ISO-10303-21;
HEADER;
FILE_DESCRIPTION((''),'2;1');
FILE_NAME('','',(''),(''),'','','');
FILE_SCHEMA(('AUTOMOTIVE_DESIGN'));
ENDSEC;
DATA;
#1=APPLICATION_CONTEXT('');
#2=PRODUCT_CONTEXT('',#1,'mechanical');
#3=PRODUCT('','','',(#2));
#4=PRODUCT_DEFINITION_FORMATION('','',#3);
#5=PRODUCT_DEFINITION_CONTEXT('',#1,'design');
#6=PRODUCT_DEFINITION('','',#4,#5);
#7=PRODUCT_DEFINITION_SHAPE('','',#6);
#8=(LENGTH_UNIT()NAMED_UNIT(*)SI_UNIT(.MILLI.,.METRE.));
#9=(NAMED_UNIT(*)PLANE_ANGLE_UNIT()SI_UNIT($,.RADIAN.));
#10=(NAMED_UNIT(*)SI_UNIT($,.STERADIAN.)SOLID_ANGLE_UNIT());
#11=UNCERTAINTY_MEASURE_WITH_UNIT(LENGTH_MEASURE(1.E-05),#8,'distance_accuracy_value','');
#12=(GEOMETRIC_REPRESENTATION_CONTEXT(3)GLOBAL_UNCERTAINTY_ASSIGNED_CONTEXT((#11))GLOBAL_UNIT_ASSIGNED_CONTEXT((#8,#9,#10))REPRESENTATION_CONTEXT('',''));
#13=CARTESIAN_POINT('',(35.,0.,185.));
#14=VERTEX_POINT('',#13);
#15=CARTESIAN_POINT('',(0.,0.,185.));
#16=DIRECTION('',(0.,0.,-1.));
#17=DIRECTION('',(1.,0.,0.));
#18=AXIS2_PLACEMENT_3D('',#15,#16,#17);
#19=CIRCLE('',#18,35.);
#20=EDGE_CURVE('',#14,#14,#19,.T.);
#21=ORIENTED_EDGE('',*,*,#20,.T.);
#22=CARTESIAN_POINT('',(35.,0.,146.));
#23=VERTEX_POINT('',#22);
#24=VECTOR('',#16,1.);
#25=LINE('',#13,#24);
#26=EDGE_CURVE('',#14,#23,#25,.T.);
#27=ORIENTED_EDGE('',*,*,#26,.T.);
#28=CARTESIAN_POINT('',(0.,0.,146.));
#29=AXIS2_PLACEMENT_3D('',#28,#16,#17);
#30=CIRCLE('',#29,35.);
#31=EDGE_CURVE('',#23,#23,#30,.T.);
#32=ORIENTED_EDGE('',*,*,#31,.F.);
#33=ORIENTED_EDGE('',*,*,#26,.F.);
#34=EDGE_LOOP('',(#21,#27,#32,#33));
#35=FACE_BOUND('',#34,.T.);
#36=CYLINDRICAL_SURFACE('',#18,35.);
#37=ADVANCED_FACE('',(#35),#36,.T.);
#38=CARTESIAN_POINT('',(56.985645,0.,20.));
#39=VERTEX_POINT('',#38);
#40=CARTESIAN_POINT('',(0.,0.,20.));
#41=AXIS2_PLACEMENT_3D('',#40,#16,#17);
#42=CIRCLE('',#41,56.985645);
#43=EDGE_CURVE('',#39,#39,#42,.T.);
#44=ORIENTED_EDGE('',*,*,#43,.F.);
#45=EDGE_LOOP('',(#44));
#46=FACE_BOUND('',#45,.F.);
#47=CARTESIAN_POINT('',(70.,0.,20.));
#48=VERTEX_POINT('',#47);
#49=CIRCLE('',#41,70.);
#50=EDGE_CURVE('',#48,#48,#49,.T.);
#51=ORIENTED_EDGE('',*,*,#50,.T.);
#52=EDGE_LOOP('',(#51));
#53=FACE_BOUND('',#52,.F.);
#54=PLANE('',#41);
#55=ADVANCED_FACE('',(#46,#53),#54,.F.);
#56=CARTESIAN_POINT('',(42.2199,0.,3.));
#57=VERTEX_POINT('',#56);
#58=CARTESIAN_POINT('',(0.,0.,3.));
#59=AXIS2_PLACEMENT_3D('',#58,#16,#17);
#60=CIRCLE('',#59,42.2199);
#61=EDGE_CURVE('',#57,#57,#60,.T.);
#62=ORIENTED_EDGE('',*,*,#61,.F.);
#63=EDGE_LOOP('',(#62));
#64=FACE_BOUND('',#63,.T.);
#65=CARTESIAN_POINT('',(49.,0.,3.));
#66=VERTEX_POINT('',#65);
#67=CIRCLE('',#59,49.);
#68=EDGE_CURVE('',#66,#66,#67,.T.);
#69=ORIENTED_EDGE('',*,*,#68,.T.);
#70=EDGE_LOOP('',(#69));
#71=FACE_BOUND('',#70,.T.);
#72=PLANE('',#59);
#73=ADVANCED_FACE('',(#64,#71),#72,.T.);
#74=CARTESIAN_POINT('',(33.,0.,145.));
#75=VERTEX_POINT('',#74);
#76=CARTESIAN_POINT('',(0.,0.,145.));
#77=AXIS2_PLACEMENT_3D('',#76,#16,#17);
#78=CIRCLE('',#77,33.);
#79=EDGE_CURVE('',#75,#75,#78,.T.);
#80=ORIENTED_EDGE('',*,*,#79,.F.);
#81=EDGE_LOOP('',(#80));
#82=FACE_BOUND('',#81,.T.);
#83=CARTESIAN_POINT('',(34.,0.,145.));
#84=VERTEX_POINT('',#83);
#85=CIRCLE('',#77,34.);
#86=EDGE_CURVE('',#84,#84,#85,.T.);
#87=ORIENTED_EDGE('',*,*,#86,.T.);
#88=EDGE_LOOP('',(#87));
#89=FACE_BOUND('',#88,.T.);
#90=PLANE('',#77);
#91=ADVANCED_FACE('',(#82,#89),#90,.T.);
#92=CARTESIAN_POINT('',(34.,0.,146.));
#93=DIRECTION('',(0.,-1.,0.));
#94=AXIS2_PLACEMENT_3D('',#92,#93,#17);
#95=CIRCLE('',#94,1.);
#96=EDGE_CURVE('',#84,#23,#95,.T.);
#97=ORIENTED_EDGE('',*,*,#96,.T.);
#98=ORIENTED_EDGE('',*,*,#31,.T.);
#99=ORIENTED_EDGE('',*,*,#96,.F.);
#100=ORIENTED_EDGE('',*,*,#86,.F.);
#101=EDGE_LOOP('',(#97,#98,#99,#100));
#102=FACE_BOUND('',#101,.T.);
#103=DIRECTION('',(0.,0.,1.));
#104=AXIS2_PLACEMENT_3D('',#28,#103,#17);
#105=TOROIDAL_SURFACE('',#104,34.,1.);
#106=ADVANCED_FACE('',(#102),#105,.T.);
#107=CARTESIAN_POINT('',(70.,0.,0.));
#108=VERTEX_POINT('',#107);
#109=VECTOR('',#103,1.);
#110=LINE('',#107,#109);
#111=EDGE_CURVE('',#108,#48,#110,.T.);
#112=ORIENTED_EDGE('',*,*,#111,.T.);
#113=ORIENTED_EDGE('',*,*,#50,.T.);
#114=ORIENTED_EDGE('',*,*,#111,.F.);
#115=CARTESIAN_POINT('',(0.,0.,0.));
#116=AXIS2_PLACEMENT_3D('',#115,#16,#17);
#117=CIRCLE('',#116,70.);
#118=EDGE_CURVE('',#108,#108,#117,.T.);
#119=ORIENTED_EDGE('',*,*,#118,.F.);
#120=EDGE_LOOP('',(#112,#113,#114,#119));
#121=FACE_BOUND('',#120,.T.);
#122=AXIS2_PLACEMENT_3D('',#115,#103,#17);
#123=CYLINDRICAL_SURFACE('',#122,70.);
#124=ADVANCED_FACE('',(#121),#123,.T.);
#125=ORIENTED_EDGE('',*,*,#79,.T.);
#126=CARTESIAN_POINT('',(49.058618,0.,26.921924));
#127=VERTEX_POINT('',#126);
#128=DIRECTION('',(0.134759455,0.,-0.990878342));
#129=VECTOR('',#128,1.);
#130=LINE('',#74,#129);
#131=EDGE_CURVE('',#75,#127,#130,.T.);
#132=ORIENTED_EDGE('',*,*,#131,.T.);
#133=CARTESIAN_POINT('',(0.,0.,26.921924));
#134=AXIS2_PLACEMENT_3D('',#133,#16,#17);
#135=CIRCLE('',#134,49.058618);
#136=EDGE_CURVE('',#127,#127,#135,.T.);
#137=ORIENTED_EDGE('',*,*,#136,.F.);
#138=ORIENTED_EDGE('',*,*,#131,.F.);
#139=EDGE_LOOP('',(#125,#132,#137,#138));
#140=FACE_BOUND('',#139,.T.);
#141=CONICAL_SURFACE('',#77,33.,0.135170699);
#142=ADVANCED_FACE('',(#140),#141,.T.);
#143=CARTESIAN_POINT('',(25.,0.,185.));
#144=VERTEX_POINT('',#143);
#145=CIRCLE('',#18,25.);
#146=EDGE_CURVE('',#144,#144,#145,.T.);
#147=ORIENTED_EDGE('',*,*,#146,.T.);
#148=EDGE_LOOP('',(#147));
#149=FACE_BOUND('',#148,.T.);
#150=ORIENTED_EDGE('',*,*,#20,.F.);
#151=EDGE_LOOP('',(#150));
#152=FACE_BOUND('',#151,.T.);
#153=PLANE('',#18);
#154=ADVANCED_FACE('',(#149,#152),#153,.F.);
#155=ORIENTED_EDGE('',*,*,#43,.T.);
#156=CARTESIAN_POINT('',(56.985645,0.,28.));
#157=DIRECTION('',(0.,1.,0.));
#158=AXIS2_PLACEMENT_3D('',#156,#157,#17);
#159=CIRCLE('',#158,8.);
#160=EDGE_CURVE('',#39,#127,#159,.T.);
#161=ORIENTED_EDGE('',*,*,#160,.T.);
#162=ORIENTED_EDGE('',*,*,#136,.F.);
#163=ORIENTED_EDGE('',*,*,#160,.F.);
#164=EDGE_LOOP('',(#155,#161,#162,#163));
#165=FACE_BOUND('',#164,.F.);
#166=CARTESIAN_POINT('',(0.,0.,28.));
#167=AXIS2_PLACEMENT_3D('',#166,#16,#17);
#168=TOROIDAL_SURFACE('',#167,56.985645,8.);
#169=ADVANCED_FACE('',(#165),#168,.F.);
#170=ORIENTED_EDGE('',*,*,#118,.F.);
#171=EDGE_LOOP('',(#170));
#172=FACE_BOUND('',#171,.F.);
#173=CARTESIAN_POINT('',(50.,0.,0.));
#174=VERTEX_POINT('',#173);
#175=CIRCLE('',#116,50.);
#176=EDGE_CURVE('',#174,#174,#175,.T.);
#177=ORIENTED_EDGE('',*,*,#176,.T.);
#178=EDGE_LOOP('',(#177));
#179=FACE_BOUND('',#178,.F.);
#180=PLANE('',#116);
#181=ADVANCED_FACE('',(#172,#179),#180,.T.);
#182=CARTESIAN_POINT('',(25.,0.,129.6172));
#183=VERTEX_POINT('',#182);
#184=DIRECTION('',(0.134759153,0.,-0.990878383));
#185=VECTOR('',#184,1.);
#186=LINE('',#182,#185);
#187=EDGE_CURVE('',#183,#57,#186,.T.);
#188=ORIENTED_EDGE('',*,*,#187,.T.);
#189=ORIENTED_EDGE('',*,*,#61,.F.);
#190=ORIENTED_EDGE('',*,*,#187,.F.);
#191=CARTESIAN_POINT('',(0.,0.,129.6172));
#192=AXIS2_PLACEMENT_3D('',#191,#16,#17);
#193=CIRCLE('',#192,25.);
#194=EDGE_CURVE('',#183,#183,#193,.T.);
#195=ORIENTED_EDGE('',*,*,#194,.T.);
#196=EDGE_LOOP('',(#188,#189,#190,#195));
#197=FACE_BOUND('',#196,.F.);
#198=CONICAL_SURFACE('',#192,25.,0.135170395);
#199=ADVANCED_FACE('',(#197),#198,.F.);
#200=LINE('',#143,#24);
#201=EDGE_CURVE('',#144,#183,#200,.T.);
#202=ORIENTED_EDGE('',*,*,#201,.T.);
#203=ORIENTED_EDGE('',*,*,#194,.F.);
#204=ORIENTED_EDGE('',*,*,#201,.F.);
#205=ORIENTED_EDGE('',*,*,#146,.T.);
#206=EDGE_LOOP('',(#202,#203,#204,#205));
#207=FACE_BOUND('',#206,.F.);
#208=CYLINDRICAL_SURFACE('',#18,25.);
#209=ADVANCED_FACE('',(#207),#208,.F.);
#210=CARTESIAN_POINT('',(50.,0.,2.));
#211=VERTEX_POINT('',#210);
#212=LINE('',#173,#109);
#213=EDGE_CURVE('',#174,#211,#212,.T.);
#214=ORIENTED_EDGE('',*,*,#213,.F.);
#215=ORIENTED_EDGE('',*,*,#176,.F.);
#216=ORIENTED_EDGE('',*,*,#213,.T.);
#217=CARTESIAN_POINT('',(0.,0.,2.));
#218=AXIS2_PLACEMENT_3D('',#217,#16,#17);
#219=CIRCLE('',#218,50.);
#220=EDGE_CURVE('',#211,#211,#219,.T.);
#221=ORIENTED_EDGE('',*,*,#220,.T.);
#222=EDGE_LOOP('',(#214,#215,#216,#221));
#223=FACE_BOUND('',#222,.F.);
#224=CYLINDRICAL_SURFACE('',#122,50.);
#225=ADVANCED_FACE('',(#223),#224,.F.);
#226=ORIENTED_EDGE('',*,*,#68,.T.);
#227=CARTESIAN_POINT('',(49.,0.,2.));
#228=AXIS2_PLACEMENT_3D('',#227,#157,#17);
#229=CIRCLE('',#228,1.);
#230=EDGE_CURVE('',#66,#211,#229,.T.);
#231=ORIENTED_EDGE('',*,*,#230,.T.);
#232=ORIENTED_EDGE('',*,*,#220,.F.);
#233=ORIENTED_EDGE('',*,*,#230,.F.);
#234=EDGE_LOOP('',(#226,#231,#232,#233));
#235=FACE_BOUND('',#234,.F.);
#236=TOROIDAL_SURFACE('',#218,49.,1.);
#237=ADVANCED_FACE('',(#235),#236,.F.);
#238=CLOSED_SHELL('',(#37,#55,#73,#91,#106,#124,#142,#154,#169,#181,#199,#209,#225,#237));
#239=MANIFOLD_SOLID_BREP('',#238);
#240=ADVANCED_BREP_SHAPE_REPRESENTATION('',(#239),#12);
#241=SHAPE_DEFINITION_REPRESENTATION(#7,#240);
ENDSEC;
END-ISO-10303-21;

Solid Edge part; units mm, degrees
sketch "Sketch1" plane through (0, 0, 0) normal (0, -1, 0) x (1, 0, 0)
  line L0 (25, 129.6172) -> (42.2199, 3)
  line L1 (50, 3) -> (42.2199, 3)
  line L2 (50, 0) -> (50, 3)
  line L3 (50, 0) -> (70, 0)
  line L4 (70, 0) -> (70, 20)
  line L5 (70, 20) -> (50, 20)
  line L6 (33, 145) -> (50, 20)
  line L7 (35, 145) -> (33, 145)
  line L8 (35, 185) -> (35, 145)
  line L9 (25, 185) -> (35, 185)
  line L10 (25, 185) -> (25, 129.6172)
  dimension "D1" = 50
  dimension "D2" = 70
  dimension "D3" = 25
  dimension "D4" = 35
  dimension "D5" = 185
  dimension "D6" = 3
  dimension "D7" = 20
  dimension "D8" = 20
  dimension "D9" = 40
  dimension "D10" = 10
  dimension "D11" = 2
revolve "RevolvedProtrusion1" add sketch "Sketch1" angle 360 about axis through (0, 0, 54) along (0, 0, -1)
fillet "Round1" radius 1 1 edges at (-50, 0, 3)
fillet "Round_2" radius 8 1 edges at (-50, 0, 20)
fillet "Round_3" radius 1 1 edges at (-35, 0, 145)
